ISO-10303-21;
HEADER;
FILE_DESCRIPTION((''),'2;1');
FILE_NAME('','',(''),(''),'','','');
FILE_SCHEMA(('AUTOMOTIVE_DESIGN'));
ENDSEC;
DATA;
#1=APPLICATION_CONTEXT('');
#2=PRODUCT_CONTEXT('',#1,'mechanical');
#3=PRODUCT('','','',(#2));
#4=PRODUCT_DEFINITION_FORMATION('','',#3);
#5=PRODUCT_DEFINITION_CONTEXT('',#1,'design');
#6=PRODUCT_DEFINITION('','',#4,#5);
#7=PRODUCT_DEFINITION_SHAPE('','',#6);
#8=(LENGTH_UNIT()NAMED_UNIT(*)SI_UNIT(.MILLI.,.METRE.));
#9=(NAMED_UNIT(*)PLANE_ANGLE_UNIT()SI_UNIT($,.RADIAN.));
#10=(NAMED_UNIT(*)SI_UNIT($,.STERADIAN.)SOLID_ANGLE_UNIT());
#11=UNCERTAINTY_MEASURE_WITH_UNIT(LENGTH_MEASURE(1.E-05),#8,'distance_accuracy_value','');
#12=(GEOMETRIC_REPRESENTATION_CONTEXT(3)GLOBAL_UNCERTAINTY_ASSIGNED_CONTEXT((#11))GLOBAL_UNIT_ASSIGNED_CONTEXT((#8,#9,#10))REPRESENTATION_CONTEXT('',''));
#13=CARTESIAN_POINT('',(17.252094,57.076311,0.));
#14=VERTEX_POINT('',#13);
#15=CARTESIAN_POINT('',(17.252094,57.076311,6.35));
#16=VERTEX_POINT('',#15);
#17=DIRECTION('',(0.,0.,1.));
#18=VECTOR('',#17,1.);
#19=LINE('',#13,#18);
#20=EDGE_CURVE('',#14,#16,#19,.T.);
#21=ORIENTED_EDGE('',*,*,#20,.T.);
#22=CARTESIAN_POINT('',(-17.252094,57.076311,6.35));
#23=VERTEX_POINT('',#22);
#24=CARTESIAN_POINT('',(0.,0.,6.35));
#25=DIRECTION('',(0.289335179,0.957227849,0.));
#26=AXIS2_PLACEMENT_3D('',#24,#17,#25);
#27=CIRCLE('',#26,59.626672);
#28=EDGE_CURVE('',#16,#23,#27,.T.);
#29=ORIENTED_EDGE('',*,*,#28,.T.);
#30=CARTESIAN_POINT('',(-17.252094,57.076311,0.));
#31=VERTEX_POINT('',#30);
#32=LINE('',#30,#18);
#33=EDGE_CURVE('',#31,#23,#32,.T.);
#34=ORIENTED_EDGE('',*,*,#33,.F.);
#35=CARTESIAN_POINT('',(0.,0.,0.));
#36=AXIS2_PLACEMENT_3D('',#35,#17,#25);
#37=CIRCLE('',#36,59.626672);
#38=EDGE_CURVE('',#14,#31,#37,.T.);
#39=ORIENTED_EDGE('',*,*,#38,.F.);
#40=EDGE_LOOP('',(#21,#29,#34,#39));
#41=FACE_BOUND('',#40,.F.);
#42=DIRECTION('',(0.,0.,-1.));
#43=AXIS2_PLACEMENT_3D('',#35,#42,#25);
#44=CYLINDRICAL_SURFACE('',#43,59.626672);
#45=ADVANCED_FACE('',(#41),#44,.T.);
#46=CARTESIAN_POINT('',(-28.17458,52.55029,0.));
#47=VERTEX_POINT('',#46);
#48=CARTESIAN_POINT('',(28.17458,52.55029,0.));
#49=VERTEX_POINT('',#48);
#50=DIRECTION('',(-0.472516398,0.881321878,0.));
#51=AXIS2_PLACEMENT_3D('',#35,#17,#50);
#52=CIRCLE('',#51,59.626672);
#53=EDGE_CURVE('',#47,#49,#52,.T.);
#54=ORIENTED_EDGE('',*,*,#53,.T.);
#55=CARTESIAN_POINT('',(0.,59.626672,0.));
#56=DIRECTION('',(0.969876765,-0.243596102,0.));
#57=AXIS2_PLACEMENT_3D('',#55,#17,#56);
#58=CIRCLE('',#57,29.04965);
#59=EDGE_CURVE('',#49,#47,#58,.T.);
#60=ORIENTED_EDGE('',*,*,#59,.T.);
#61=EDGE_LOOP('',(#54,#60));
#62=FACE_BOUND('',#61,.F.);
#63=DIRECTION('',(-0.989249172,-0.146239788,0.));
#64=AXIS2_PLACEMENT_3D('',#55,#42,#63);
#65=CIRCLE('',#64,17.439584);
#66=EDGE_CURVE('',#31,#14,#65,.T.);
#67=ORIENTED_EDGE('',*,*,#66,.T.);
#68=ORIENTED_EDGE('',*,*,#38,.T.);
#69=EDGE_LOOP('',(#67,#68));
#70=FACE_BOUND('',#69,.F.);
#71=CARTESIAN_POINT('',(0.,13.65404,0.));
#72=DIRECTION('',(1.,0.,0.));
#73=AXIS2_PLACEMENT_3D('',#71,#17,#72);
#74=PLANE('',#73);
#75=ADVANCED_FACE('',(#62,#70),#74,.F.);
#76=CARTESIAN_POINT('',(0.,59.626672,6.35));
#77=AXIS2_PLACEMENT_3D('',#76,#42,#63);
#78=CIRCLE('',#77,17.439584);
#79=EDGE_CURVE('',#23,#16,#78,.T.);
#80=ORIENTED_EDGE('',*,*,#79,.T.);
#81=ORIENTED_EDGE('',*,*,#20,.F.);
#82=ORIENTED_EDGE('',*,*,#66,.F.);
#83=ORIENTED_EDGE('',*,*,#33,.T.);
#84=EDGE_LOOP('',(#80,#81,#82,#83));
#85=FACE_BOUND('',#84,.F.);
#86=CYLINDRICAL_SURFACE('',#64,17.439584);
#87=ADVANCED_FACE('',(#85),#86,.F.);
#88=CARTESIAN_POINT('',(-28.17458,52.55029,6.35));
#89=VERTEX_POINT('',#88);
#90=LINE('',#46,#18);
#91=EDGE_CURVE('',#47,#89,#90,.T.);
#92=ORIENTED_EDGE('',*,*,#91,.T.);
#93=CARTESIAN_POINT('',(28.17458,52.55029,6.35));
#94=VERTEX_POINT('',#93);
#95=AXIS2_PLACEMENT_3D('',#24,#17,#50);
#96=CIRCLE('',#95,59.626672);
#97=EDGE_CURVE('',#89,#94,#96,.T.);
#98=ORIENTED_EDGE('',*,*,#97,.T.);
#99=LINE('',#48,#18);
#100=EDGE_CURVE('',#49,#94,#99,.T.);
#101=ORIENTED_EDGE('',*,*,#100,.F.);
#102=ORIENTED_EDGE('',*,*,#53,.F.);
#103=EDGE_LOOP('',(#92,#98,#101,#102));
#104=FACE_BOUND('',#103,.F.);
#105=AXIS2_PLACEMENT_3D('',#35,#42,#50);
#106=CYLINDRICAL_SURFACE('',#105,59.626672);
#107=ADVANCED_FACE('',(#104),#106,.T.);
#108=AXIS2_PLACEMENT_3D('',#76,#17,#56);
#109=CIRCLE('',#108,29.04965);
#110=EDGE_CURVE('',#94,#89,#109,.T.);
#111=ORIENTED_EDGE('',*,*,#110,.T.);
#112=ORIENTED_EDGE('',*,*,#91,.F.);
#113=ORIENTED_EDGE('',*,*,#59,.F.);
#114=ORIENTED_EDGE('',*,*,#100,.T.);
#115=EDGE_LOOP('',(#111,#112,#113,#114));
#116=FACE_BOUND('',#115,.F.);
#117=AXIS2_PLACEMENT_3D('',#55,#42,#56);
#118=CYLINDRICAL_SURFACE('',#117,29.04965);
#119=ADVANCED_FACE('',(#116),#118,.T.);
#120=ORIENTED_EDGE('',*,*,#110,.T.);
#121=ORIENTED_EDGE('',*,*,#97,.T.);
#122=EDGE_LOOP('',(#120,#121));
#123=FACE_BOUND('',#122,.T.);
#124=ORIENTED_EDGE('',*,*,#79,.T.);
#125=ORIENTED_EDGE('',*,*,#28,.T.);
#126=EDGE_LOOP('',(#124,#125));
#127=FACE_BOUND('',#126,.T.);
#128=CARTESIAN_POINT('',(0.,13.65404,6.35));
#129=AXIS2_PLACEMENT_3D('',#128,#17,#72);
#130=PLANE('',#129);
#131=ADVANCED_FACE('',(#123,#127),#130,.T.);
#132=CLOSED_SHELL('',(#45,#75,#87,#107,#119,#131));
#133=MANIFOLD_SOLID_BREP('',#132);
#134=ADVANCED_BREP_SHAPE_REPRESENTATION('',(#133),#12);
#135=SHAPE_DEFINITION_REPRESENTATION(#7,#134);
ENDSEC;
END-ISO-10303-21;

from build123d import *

# Parameters (mm, degrees)
F1_DEPTH = 6.35


# Not quite as in the source:
# - the program builds the solid bodies; features that only make, move or delete a surface that nothing else refers to are left out


with BuildPart() as f1:
    # F0 (on Top) → F1 (new body)
    with BuildSketch(Plane.XY):
        with BuildLine():
            ThreePointArc((-28.1745800825, 52.5502901658), (0, -59.6266715433), (28.1745800825, 52.5502901658))
            ThreePointArc((28.1745800825, 52.5502901658), (0, 88.6763210459), (-28.1745800825, 52.5502901658))
        make_face()
        with BuildLine():
            ThreePointArc((-17.2520936805, 57.0763105235), (0, 77.0662551877), (17.2520936805, 57.0763105235))
            ThreePointArc((17.2520936805, 57.0763105235), (0, 59.6266715433), (-17.2520936805, 57.0763105235))
        make_face(mode=Mode.SUBTRACT)
    extrude(amount=F1_DEPTH)


solid = f1.part
